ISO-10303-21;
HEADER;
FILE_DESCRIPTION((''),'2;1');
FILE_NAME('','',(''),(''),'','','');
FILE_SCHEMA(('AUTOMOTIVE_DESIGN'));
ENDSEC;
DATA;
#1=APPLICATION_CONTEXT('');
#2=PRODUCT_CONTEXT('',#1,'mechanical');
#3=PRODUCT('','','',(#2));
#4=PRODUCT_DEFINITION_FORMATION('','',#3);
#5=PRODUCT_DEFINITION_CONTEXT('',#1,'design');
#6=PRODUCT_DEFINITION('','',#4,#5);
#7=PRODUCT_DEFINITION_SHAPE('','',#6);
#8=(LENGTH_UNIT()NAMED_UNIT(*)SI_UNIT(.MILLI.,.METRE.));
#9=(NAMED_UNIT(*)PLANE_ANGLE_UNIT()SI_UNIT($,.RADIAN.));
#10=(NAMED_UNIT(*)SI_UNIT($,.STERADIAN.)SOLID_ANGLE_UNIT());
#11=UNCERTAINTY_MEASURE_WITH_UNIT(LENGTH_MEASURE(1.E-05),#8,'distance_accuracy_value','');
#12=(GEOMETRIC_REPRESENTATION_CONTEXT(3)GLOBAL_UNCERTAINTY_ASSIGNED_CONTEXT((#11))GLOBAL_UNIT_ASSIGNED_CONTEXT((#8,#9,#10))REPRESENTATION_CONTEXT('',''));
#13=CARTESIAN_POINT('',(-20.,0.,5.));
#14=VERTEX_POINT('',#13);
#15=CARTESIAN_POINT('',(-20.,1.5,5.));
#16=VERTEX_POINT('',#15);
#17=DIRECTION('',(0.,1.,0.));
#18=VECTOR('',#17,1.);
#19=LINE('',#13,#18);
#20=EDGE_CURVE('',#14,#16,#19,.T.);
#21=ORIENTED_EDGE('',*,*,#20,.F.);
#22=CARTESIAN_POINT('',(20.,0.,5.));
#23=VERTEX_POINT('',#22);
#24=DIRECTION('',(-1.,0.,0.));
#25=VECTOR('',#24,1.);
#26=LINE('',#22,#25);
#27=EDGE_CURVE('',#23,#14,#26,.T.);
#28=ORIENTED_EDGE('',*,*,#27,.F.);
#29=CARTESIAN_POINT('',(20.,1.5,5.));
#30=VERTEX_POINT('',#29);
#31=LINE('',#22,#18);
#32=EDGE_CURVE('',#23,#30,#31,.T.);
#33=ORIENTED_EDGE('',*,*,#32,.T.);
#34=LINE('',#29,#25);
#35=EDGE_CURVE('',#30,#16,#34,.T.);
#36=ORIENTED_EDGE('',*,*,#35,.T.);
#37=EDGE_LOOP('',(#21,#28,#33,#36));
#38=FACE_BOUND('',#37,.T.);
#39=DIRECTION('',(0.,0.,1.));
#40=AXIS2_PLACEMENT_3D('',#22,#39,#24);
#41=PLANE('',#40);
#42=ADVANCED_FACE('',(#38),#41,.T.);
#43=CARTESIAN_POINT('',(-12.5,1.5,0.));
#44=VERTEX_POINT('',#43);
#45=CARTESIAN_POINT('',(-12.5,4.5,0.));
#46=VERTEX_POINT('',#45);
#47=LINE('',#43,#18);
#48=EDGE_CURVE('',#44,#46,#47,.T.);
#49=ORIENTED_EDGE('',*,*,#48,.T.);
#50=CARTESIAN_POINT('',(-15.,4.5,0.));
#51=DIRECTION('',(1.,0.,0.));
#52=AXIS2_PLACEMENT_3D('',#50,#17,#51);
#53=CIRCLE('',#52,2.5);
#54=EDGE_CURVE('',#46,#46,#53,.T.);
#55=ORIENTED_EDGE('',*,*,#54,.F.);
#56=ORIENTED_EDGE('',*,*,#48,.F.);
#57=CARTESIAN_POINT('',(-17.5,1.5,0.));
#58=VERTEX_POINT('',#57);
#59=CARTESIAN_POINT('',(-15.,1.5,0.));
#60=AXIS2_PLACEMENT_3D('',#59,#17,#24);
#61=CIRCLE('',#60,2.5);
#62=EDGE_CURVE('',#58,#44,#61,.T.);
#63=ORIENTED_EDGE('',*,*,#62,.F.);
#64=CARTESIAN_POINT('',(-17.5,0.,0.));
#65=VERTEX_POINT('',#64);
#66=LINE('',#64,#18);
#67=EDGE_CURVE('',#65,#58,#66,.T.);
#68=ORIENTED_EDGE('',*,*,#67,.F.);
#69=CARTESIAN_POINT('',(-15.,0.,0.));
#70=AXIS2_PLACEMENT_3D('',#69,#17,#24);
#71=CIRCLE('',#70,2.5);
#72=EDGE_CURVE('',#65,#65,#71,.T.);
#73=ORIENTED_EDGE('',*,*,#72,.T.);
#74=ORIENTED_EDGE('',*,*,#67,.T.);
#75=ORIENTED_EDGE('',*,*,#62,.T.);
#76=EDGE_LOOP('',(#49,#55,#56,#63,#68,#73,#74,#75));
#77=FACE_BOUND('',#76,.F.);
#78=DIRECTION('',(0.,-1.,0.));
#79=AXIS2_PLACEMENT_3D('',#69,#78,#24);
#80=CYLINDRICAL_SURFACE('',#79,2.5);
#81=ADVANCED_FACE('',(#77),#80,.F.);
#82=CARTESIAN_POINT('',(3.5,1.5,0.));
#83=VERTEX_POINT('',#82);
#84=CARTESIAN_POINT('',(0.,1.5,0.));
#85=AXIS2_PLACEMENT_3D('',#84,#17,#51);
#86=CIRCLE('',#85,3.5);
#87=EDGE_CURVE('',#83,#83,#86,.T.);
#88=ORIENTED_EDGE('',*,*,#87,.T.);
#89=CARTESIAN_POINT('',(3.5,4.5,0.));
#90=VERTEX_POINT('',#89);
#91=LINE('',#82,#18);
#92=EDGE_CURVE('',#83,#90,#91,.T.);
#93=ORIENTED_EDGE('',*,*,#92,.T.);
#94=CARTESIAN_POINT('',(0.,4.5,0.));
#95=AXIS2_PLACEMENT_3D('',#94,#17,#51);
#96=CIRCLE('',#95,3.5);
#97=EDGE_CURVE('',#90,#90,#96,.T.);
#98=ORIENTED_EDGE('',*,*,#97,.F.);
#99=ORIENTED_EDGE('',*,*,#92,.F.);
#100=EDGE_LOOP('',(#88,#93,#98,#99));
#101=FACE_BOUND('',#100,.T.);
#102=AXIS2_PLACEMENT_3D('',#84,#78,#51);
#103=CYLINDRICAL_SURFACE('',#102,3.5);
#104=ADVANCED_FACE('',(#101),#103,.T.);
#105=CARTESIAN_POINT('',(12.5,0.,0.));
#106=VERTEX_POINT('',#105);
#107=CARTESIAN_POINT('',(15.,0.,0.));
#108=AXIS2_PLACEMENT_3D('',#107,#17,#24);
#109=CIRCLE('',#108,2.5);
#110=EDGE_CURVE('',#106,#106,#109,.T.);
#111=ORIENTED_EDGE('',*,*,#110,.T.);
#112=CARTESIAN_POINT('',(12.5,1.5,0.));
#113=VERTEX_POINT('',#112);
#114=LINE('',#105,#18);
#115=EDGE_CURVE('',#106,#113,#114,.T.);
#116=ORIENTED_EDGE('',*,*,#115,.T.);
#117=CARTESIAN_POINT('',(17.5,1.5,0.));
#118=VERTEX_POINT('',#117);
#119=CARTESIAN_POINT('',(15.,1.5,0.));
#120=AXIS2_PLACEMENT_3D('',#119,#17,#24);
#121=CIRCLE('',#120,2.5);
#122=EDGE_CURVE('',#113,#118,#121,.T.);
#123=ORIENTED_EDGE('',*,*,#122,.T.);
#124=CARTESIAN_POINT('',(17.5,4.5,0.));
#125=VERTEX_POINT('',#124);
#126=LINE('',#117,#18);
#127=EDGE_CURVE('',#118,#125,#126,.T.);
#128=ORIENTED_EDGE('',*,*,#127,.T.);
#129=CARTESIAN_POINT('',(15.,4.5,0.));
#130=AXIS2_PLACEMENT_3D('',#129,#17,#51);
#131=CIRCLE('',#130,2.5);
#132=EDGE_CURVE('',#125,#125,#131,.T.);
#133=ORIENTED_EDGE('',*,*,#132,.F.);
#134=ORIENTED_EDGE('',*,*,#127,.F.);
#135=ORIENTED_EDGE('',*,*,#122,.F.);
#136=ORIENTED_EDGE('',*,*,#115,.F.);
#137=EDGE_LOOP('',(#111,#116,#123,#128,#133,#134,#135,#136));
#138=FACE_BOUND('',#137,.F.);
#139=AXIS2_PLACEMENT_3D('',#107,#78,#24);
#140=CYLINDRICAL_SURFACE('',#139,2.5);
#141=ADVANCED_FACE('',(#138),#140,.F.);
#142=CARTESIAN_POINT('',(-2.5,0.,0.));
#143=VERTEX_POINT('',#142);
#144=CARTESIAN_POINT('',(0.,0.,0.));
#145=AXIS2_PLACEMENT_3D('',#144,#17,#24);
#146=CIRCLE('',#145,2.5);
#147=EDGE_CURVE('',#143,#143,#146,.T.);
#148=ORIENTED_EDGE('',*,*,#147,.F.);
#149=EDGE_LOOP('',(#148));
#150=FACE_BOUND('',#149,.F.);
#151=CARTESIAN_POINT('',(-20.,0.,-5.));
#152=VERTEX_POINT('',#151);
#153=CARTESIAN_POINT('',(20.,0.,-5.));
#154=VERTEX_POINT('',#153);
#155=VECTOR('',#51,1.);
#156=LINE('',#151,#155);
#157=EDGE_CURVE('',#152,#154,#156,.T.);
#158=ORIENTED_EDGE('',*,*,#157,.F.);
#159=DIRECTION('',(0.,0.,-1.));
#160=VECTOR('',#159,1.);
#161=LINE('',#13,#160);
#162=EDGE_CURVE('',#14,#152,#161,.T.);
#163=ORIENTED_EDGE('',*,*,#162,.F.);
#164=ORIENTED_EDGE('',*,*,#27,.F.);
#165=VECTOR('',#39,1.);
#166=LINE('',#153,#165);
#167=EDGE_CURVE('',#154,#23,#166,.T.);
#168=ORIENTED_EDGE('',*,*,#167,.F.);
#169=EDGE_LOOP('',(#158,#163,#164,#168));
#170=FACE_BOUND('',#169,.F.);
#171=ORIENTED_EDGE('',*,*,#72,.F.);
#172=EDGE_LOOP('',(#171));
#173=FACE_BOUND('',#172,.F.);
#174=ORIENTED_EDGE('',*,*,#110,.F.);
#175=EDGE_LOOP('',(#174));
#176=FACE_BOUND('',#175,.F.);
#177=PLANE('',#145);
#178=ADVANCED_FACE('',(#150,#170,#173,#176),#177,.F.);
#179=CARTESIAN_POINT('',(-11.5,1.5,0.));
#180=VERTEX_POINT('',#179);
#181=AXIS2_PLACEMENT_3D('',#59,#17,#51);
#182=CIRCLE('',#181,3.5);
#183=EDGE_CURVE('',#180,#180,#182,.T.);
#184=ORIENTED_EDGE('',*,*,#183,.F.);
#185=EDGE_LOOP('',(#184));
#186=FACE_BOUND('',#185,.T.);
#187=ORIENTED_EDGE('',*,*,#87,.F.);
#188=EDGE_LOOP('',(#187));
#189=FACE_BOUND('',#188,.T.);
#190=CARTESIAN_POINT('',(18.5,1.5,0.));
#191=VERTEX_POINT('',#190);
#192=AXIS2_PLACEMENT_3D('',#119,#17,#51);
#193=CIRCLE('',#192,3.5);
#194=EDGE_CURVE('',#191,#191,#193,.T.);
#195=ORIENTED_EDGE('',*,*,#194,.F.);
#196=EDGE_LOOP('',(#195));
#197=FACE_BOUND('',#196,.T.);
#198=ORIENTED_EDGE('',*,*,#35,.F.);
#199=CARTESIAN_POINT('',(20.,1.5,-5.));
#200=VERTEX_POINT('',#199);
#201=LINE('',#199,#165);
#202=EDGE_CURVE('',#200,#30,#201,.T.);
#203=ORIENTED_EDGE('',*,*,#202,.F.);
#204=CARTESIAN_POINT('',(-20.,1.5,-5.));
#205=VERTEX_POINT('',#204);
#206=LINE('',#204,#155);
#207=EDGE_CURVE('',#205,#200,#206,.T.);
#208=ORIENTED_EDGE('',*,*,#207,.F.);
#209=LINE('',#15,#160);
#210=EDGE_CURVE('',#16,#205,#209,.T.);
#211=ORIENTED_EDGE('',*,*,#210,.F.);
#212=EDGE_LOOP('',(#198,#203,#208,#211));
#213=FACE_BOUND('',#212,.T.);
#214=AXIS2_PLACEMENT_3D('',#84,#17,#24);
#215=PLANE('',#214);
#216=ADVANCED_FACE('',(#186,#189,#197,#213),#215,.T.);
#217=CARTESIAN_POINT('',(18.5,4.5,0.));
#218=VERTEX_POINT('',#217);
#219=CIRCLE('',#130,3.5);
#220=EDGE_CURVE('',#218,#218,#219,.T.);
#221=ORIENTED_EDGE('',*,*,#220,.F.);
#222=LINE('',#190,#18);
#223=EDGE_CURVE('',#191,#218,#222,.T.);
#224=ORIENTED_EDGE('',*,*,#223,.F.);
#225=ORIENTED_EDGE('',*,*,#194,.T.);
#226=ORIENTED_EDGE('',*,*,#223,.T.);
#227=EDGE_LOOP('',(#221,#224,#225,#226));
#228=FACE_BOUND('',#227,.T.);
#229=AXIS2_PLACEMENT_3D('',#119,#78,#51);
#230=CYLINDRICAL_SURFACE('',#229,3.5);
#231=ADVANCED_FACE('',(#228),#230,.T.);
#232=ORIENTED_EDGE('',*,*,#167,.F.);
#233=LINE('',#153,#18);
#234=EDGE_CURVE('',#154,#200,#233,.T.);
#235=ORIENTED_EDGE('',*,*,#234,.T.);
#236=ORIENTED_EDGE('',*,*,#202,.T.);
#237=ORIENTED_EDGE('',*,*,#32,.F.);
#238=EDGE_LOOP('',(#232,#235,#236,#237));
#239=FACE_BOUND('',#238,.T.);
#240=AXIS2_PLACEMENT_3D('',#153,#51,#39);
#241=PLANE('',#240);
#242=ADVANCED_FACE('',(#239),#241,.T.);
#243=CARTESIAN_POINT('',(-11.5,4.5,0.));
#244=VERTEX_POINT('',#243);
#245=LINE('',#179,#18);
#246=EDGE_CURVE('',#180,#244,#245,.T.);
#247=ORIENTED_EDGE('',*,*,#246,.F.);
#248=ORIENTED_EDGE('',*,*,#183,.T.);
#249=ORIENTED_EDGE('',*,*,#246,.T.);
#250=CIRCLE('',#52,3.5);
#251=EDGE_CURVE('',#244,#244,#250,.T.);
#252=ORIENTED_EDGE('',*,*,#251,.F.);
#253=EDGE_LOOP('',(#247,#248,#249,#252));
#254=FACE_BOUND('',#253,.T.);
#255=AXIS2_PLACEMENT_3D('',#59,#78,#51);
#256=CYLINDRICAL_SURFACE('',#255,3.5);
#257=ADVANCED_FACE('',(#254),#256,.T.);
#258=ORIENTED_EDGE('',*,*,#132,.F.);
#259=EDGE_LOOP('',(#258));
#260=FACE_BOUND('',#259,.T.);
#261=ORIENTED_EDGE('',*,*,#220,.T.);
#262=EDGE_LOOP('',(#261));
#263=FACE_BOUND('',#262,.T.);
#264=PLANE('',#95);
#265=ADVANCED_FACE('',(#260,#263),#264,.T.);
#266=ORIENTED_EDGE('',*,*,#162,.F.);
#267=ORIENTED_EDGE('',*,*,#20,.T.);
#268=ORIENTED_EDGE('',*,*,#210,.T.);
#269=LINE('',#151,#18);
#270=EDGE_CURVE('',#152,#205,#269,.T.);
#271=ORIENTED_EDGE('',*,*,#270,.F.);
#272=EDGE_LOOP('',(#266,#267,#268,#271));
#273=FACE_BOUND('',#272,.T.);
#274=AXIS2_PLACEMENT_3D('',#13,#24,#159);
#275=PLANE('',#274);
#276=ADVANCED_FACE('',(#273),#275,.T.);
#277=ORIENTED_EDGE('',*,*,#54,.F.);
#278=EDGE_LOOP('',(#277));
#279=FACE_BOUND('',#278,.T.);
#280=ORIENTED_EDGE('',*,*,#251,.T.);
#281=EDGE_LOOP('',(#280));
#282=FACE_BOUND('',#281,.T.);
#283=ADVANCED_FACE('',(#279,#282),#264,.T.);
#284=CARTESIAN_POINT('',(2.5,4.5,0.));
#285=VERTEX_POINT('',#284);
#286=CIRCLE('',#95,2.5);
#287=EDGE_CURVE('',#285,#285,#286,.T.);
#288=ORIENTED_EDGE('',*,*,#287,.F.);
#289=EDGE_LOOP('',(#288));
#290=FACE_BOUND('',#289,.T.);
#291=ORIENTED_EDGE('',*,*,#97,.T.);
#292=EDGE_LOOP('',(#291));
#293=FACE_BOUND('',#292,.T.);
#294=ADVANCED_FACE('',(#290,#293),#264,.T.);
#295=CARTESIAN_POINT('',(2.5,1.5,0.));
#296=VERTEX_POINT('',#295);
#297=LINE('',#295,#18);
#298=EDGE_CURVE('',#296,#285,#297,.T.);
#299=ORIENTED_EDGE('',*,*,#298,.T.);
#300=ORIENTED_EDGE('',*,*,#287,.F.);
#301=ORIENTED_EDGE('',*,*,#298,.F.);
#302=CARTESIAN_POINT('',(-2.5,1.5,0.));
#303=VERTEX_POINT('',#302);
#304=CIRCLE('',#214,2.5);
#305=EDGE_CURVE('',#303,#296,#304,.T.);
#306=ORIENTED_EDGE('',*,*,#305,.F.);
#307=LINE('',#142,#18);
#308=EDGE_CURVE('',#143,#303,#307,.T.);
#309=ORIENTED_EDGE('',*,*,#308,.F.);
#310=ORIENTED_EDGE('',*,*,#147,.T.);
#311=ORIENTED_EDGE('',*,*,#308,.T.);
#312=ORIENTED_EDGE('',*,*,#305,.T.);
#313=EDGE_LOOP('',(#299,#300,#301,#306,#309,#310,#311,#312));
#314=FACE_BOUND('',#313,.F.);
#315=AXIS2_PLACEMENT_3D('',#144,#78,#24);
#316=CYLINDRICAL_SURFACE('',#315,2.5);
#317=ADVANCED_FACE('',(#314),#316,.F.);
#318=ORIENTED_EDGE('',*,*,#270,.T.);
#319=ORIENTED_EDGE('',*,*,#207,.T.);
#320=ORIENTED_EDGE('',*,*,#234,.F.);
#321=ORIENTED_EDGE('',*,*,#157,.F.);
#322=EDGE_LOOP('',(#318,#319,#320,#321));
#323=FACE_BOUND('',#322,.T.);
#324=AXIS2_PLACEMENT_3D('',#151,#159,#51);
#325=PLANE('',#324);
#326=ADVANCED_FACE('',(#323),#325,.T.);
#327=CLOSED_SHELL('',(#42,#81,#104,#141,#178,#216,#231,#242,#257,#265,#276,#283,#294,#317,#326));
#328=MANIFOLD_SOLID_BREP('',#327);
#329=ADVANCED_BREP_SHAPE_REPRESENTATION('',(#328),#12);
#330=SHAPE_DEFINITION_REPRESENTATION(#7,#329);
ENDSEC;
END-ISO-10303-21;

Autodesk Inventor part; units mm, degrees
ref_plane "YZ Plane" through (0, 0, 0) normal (1, 0, 0) x (0, 1, 0)
ref_plane "XZ Plane" through (0, 0, 0) normal (0, 1, 0) x (-1, 0, 0)
ref_plane "XY Plane" through (0, 0, 0) normal (0, 0, 1) x (1, 0, 0)
sketch "Sketch1" plane through (0, 0, 0) normal (0, 1, 0) x (-1, 0, 0)
  line L0 (20, -5) -> (-20, -5)
  line L1 (-20, -5) -> (-20, 5)
  line L2 (-20, 5) -> (20, 5)
  line L3 (20, 5) -> (20, -5)
  circle A0 centre (0, 0) radius 2.5
  line L4 (0, 0) -> (15, 0)
  circle A1 centre (15, 0) radius 2.5
  line L5 (0, 0) -> (-15, 0)
  circle A2 centre (-15, 0) radius 2.5
  dimension "d0" = 40
  dimension "d1" = 10
  dimension "d13" = 5
  dimension "d14" = 15
  dimension "d15" = 5
  dimension "d16" = 15
  dimension "d17" = 5
extrude "Extrusion1" add sketch "Sketch1" along normal blind 1.5
sketch "Sketch4" plane through (0, 1.5, 0) normal (0, 1, 0) x (1, 0, 0)
  circle A0 centre (0, 0) radius 3.5
  circle A1 centre (-15, 0) radius 3.5
  circle A2 centre (15, 0) radius 3.5
  circle A3 centre (-15, 0) radius 2.5
  circle A4 centre (0, 0) radius 2.5
  circle A5 centre (15, 0) radius 2.5
  dimension "d18" = 7
  dimension "d21" = 7
  dimension "d22" = 7
  dimension "d23" = 1
  dimension "d24" = 1
  dimension "d25" = 1
extrude "Extrusion3" add sketch "Sketch4" along normal blind 3
properties part number "GANJEL LED PLA"
